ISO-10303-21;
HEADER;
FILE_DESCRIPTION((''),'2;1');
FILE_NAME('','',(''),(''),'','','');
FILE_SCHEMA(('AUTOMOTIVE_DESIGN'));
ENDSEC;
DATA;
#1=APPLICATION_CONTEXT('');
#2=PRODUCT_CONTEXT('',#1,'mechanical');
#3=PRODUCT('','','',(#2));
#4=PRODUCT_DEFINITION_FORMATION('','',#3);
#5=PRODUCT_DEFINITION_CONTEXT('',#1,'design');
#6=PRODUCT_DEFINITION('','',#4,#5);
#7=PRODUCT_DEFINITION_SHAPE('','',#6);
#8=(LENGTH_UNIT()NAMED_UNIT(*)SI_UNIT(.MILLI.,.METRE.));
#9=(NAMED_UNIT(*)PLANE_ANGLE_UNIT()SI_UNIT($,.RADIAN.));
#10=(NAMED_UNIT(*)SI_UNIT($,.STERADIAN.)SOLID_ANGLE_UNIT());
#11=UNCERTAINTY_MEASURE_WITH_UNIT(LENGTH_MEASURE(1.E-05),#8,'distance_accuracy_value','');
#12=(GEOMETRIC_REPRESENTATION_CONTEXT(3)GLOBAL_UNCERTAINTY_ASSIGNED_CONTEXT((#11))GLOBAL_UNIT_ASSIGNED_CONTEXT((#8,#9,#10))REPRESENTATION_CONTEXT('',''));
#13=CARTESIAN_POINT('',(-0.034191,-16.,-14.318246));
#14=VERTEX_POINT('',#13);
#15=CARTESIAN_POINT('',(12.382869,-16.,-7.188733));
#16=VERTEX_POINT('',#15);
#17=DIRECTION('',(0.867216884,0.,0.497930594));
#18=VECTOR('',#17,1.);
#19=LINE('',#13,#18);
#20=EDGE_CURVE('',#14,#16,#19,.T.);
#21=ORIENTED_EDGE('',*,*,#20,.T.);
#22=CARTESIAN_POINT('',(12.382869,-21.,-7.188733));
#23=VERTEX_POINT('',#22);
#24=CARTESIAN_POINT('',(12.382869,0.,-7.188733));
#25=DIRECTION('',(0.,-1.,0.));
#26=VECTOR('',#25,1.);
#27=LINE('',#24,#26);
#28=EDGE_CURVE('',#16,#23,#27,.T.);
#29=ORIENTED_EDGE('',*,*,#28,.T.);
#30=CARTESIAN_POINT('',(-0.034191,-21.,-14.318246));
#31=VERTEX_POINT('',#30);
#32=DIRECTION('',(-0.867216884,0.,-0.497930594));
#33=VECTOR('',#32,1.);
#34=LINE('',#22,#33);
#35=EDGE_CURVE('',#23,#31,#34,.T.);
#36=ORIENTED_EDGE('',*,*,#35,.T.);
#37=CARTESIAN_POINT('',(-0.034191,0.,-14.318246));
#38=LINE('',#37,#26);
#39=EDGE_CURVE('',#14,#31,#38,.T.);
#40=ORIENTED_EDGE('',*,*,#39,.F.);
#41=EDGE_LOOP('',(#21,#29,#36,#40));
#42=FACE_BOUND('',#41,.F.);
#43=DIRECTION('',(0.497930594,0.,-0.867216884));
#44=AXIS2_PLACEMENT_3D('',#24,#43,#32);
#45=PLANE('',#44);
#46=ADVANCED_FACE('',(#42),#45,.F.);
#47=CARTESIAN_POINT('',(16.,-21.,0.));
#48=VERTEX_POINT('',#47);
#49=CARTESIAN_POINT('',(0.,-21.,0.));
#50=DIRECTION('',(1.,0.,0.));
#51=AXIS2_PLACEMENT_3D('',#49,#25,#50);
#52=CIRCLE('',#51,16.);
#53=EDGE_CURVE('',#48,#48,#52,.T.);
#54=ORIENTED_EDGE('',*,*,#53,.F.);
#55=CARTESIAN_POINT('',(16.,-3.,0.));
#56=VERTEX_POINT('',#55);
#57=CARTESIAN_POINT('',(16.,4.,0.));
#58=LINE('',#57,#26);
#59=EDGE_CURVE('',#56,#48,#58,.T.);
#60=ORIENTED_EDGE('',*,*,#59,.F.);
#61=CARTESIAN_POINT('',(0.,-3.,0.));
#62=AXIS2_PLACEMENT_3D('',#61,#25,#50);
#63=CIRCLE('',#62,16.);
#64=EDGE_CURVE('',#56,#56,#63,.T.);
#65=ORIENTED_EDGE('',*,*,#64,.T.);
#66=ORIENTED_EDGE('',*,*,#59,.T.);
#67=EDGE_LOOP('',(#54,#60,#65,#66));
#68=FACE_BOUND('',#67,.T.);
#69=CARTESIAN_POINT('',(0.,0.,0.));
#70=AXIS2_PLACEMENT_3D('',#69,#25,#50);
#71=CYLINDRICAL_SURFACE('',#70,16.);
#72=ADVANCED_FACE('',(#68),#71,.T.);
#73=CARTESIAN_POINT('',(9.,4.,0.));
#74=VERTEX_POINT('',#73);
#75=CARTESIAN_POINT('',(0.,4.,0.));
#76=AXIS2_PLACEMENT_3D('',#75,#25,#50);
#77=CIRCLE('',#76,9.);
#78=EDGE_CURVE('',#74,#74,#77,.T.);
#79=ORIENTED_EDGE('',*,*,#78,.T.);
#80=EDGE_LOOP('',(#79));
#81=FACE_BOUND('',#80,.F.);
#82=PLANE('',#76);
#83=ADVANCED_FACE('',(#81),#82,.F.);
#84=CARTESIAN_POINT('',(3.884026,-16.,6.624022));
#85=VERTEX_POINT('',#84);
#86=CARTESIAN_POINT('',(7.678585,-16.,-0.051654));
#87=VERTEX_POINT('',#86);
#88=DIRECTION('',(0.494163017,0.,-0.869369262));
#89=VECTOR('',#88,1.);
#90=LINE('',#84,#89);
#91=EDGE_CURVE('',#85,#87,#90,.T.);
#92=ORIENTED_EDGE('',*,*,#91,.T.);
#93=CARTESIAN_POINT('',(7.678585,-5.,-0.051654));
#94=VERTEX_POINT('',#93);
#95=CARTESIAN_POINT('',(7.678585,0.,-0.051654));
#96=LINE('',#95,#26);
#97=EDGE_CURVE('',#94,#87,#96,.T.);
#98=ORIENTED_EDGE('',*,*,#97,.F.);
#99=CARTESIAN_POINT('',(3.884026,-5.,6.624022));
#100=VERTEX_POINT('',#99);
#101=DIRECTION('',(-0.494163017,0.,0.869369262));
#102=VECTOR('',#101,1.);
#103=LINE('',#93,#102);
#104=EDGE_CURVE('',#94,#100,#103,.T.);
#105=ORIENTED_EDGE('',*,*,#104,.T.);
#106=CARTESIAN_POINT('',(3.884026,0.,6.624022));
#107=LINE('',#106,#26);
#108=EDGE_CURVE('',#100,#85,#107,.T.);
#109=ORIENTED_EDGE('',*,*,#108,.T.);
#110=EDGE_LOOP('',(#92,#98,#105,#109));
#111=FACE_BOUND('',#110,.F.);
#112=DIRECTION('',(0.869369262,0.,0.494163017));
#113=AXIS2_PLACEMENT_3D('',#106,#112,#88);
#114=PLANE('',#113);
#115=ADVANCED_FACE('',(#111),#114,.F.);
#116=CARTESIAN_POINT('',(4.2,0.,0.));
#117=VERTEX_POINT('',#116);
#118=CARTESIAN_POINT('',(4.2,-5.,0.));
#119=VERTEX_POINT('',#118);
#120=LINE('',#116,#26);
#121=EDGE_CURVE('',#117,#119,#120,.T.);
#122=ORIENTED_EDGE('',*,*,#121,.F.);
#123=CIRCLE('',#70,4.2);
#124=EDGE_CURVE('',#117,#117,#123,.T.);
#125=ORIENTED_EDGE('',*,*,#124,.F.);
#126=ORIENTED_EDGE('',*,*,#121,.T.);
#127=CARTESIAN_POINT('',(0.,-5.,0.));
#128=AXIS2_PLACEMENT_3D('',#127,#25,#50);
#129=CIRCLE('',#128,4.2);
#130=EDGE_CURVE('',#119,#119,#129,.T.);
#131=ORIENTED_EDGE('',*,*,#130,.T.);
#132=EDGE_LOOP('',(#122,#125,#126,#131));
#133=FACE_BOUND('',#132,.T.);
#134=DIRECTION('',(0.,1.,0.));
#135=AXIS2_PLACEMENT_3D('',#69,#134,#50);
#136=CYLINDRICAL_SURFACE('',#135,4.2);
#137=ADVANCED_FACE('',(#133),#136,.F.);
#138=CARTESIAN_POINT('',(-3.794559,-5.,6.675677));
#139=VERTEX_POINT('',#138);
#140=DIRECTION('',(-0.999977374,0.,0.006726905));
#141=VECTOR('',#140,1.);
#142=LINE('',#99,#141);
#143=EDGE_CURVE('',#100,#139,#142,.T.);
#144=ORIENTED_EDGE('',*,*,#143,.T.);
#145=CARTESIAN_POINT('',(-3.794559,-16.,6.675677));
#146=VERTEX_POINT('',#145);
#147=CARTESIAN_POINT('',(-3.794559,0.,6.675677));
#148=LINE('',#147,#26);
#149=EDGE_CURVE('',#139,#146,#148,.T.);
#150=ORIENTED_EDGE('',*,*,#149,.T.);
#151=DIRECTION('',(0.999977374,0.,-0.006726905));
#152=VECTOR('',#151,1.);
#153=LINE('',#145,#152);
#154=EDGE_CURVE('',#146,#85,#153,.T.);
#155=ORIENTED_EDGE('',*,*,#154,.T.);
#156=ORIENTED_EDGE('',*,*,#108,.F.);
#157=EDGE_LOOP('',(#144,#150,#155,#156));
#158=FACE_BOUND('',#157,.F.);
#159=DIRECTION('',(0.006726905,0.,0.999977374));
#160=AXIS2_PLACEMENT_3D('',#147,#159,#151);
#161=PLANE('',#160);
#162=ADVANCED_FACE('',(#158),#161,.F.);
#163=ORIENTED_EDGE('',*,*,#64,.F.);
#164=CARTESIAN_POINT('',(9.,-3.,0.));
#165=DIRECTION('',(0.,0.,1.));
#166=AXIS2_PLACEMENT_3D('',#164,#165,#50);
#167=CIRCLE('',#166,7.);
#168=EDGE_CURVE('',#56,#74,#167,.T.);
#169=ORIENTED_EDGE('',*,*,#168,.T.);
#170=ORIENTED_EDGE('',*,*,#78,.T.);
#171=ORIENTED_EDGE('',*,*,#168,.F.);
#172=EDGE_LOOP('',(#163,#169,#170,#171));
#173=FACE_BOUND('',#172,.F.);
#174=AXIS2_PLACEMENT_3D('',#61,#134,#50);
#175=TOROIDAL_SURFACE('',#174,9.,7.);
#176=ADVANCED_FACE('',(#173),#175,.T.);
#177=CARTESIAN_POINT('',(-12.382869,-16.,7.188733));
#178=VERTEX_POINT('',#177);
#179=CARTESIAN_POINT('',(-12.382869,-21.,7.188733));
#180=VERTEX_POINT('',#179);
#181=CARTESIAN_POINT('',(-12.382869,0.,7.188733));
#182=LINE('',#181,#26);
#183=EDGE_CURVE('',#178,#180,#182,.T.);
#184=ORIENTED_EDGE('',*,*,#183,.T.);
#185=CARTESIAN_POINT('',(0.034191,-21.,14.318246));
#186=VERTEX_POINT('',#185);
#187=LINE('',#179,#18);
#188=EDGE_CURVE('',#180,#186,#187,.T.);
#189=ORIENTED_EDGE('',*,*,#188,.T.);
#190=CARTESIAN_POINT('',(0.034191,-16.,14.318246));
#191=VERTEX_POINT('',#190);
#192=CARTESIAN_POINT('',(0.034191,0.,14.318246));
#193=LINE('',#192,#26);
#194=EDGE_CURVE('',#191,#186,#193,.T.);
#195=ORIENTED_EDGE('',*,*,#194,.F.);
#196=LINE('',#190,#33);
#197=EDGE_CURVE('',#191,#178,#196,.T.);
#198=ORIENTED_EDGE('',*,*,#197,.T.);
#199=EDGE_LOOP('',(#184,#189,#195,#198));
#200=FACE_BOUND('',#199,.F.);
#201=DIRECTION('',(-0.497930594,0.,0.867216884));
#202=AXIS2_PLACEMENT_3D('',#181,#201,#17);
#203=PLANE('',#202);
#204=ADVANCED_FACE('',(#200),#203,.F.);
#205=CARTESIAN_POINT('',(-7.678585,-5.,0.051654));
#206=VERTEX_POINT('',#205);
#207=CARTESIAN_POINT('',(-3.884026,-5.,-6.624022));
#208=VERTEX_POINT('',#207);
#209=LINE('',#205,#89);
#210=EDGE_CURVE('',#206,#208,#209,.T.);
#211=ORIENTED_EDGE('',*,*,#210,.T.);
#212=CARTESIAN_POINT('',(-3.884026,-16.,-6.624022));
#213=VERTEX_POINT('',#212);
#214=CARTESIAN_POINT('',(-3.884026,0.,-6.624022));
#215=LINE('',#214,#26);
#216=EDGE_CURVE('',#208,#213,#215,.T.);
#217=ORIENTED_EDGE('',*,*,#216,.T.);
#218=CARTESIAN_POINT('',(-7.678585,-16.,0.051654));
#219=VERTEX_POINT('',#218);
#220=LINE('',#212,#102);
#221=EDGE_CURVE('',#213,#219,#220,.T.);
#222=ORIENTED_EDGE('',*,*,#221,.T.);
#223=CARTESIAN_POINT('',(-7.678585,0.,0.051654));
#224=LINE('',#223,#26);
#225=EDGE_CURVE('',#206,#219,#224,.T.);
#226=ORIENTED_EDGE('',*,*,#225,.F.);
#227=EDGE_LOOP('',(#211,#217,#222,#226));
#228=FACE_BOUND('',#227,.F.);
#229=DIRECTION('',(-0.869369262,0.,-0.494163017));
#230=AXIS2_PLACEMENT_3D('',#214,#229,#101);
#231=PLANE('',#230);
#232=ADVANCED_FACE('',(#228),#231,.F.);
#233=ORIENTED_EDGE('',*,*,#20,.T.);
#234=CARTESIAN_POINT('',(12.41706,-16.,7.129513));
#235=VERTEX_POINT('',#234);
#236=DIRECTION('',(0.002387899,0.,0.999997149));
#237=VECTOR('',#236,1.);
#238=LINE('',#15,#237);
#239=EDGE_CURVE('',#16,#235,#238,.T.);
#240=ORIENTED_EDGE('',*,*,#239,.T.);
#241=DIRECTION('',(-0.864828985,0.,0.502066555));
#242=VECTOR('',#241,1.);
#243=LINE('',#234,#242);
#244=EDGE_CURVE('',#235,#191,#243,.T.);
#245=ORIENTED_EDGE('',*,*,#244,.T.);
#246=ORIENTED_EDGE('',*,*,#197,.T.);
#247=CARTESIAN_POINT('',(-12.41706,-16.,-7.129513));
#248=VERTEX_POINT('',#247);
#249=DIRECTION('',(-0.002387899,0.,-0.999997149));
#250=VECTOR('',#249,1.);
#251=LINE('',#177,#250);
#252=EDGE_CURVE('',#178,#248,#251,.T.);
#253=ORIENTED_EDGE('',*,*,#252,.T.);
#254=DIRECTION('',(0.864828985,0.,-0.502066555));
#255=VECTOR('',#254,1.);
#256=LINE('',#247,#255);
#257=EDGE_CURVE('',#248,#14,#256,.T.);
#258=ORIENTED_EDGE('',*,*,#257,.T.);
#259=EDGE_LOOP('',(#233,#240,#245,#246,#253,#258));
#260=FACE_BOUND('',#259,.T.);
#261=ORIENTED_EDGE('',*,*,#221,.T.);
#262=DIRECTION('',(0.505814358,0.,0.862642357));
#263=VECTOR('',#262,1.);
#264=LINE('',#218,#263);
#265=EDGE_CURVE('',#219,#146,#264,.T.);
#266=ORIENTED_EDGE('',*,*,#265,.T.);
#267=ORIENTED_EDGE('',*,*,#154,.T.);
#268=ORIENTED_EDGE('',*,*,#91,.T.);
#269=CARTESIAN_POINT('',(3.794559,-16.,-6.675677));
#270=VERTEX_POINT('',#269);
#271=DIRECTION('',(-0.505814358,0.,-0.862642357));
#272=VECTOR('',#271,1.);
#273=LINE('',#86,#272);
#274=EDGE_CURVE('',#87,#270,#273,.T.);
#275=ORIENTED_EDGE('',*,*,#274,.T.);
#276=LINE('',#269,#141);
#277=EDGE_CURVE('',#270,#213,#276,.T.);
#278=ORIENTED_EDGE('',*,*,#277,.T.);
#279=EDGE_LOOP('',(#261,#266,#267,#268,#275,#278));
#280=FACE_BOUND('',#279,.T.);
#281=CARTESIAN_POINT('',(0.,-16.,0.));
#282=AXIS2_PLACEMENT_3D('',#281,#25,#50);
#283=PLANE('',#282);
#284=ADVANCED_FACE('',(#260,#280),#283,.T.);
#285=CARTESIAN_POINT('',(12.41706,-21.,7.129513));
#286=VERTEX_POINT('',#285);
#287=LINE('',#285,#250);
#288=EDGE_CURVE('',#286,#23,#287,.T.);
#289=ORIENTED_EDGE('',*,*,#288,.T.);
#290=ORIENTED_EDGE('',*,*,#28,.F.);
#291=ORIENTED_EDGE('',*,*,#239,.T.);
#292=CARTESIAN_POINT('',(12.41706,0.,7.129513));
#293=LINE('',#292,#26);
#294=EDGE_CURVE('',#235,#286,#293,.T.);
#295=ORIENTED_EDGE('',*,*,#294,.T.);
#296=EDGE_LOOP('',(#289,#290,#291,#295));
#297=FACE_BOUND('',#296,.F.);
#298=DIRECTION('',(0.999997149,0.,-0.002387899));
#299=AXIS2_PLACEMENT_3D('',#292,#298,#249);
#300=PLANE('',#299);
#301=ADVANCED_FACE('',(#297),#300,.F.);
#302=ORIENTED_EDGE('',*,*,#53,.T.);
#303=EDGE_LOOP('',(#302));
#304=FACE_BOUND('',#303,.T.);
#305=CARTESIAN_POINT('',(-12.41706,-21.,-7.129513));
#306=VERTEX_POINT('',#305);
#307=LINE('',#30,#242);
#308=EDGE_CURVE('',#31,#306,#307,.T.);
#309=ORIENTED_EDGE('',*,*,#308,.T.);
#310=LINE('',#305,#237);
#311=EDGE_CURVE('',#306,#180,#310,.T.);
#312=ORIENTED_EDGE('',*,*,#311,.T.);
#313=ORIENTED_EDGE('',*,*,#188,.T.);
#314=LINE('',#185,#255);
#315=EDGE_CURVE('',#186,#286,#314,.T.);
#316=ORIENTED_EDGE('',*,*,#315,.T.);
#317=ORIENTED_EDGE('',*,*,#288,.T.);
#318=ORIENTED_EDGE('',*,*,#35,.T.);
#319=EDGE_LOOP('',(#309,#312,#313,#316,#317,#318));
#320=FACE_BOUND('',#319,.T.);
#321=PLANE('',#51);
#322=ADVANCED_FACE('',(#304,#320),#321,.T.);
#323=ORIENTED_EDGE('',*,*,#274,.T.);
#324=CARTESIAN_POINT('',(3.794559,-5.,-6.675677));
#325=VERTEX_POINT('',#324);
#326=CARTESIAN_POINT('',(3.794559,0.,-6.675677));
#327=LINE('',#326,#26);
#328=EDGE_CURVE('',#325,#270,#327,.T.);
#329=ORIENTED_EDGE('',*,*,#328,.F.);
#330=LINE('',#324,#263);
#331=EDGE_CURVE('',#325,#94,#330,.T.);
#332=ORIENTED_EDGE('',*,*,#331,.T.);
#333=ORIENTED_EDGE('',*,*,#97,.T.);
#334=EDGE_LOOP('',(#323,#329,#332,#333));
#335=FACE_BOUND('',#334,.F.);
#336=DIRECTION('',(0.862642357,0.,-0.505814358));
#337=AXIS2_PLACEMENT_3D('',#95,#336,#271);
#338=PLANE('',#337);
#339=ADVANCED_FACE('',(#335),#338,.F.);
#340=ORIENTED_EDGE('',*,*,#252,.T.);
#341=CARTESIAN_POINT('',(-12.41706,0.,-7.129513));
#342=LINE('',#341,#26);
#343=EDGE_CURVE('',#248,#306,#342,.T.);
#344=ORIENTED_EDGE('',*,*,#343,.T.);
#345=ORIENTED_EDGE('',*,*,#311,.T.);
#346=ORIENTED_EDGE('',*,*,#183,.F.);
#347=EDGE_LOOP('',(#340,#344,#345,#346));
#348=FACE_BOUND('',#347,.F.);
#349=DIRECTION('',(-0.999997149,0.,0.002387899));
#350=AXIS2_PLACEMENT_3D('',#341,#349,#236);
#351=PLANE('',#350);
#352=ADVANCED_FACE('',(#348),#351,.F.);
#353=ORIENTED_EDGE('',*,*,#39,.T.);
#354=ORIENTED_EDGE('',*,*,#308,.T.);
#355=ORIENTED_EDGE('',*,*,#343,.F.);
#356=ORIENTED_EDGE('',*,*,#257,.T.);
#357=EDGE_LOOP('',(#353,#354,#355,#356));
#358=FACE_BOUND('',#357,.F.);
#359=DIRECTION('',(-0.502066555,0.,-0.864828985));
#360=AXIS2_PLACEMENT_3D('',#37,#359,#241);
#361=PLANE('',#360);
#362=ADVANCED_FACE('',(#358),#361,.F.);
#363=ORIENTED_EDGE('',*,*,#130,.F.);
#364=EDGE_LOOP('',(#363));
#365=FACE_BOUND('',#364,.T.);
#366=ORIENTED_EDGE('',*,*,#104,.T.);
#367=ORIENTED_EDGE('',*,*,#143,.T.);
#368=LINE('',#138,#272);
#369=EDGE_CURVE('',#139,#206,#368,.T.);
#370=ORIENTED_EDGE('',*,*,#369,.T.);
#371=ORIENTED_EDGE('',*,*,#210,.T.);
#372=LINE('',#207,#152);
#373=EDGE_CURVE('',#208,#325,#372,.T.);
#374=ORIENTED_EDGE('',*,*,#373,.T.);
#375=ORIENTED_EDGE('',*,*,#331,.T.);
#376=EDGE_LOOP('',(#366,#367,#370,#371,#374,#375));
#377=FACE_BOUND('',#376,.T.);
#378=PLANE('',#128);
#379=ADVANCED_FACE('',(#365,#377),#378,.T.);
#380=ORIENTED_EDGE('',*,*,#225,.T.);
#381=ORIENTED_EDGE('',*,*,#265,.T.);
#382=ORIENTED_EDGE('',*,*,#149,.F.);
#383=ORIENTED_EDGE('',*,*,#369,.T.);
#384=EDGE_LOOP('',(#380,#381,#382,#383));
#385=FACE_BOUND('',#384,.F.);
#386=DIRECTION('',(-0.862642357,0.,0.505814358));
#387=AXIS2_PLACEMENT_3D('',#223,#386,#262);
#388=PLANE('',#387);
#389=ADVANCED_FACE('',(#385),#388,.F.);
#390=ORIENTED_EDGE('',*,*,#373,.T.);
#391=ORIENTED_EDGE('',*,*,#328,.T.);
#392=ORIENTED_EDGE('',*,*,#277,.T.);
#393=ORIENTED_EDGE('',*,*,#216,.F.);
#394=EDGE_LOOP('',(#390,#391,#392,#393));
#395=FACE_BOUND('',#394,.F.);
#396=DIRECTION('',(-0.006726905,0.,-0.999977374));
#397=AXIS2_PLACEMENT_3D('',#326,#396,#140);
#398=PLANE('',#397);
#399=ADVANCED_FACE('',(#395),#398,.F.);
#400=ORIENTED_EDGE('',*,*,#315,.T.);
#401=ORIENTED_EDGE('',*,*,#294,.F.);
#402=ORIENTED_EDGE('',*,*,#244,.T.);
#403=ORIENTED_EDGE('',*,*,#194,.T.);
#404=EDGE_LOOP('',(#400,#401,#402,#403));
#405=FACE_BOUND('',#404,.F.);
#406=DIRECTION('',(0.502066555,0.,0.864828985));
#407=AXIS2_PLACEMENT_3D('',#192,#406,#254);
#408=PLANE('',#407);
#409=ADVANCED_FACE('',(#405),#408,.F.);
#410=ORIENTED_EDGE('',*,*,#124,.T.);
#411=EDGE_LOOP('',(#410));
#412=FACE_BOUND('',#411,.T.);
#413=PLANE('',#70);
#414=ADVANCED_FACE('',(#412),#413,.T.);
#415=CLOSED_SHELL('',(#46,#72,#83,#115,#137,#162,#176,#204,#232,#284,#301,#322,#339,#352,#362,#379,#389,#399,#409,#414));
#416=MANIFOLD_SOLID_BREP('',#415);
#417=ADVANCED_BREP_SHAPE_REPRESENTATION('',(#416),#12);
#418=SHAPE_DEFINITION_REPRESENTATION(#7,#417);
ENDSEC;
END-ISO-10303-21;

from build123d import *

# Parameters (mm, degrees)
F0_R     = 16
F1_DEPTH = 21
F0_R_2   = 9
F2_DEPTH = 16
F3_R     = 16
F4_DEPTH = 4
F5_DEPTH = 16
F6_R     = 7
F0_R_3   = 4.2
F7_DEPTH = 5


with BuildPart() as f1:
    # F0 (on Front) → F1 (new body)
    with BuildSketch(Plane.XZ):
        Circle(F0_R)
        Polygon((-12.417059955, -7.1295129852), (-12.3828693393, 7.1887328687), (0.0341906157, 14.318245854), (12.417059955, 7.1295129852), (12.3828693393, -7.1887328687), (-0.0341906157, -14.318245854), align=None, mode=Mode.SUBTRACT)
    extrude(amount=F1_DEPTH)



with BuildPart() as f2:
    # F0 (on Front) → F2 (new body)
    with BuildSketch(Plane.XZ):
        Circle(F0_R_2)
        Polygon((-3.8840263382, -6.6240223986), (-7.6785848415, 0.0516542785), (-3.7945585034, 6.6756766771), (3.8840263382, 6.6240223986), (7.6785848415, -0.0516542785), (3.7945585034, -6.6756766771), align=None, mode=Mode.SUBTRACT)
    extrude(amount=F2_DEPTH)


with BuildPart() as f1_1:
    add(f1.part)

    add(f2.part)  # F4 merges F2
    # F3 (on Front) → F4 (join)
    with BuildSketch(Plane.XZ):
        Circle(F3_R)
    extrude(amount=-F4_DEPTH)

    # F0 (on Front) → F5 (join)
    with BuildSketch(Plane.XZ):
        Polygon((0.0341906157, 14.318245854), (-12.3828693393, 7.1887328687), (-12.417059955, -7.1295129852), (-0.0341906157, -14.318245854), (12.3828693393, -7.1887328687), (12.417059955, 7.1295129852), align=None)
        Circle(F0_R_2, mode=Mode.SUBTRACT)
    extrude(amount=F5_DEPTH)

    # F6
    f6_edges = [f1_1.edges().sort_by_distance(p)[0] for p in [
        (-16, 4, 0),
    ]]
    fillet(f6_edges, radius=F6_R)

    # F0 (on Front) → F7 (join)
    with BuildSketch(Plane.XZ):
        Polygon((-3.7945585034, 6.6756766771), (-7.6785848415, 0.0516542785), (-3.8840263382, -6.6240223986), (3.7945585034, -6.6756766771), (7.6785848415, -0.0516542785), (3.8840263382, 6.6240223986), align=None)
        Circle(F0_R_3, mode=Mode.SUBTRACT)
    extrude(amount=F7_DEPTH)


solid = f1_1.part
